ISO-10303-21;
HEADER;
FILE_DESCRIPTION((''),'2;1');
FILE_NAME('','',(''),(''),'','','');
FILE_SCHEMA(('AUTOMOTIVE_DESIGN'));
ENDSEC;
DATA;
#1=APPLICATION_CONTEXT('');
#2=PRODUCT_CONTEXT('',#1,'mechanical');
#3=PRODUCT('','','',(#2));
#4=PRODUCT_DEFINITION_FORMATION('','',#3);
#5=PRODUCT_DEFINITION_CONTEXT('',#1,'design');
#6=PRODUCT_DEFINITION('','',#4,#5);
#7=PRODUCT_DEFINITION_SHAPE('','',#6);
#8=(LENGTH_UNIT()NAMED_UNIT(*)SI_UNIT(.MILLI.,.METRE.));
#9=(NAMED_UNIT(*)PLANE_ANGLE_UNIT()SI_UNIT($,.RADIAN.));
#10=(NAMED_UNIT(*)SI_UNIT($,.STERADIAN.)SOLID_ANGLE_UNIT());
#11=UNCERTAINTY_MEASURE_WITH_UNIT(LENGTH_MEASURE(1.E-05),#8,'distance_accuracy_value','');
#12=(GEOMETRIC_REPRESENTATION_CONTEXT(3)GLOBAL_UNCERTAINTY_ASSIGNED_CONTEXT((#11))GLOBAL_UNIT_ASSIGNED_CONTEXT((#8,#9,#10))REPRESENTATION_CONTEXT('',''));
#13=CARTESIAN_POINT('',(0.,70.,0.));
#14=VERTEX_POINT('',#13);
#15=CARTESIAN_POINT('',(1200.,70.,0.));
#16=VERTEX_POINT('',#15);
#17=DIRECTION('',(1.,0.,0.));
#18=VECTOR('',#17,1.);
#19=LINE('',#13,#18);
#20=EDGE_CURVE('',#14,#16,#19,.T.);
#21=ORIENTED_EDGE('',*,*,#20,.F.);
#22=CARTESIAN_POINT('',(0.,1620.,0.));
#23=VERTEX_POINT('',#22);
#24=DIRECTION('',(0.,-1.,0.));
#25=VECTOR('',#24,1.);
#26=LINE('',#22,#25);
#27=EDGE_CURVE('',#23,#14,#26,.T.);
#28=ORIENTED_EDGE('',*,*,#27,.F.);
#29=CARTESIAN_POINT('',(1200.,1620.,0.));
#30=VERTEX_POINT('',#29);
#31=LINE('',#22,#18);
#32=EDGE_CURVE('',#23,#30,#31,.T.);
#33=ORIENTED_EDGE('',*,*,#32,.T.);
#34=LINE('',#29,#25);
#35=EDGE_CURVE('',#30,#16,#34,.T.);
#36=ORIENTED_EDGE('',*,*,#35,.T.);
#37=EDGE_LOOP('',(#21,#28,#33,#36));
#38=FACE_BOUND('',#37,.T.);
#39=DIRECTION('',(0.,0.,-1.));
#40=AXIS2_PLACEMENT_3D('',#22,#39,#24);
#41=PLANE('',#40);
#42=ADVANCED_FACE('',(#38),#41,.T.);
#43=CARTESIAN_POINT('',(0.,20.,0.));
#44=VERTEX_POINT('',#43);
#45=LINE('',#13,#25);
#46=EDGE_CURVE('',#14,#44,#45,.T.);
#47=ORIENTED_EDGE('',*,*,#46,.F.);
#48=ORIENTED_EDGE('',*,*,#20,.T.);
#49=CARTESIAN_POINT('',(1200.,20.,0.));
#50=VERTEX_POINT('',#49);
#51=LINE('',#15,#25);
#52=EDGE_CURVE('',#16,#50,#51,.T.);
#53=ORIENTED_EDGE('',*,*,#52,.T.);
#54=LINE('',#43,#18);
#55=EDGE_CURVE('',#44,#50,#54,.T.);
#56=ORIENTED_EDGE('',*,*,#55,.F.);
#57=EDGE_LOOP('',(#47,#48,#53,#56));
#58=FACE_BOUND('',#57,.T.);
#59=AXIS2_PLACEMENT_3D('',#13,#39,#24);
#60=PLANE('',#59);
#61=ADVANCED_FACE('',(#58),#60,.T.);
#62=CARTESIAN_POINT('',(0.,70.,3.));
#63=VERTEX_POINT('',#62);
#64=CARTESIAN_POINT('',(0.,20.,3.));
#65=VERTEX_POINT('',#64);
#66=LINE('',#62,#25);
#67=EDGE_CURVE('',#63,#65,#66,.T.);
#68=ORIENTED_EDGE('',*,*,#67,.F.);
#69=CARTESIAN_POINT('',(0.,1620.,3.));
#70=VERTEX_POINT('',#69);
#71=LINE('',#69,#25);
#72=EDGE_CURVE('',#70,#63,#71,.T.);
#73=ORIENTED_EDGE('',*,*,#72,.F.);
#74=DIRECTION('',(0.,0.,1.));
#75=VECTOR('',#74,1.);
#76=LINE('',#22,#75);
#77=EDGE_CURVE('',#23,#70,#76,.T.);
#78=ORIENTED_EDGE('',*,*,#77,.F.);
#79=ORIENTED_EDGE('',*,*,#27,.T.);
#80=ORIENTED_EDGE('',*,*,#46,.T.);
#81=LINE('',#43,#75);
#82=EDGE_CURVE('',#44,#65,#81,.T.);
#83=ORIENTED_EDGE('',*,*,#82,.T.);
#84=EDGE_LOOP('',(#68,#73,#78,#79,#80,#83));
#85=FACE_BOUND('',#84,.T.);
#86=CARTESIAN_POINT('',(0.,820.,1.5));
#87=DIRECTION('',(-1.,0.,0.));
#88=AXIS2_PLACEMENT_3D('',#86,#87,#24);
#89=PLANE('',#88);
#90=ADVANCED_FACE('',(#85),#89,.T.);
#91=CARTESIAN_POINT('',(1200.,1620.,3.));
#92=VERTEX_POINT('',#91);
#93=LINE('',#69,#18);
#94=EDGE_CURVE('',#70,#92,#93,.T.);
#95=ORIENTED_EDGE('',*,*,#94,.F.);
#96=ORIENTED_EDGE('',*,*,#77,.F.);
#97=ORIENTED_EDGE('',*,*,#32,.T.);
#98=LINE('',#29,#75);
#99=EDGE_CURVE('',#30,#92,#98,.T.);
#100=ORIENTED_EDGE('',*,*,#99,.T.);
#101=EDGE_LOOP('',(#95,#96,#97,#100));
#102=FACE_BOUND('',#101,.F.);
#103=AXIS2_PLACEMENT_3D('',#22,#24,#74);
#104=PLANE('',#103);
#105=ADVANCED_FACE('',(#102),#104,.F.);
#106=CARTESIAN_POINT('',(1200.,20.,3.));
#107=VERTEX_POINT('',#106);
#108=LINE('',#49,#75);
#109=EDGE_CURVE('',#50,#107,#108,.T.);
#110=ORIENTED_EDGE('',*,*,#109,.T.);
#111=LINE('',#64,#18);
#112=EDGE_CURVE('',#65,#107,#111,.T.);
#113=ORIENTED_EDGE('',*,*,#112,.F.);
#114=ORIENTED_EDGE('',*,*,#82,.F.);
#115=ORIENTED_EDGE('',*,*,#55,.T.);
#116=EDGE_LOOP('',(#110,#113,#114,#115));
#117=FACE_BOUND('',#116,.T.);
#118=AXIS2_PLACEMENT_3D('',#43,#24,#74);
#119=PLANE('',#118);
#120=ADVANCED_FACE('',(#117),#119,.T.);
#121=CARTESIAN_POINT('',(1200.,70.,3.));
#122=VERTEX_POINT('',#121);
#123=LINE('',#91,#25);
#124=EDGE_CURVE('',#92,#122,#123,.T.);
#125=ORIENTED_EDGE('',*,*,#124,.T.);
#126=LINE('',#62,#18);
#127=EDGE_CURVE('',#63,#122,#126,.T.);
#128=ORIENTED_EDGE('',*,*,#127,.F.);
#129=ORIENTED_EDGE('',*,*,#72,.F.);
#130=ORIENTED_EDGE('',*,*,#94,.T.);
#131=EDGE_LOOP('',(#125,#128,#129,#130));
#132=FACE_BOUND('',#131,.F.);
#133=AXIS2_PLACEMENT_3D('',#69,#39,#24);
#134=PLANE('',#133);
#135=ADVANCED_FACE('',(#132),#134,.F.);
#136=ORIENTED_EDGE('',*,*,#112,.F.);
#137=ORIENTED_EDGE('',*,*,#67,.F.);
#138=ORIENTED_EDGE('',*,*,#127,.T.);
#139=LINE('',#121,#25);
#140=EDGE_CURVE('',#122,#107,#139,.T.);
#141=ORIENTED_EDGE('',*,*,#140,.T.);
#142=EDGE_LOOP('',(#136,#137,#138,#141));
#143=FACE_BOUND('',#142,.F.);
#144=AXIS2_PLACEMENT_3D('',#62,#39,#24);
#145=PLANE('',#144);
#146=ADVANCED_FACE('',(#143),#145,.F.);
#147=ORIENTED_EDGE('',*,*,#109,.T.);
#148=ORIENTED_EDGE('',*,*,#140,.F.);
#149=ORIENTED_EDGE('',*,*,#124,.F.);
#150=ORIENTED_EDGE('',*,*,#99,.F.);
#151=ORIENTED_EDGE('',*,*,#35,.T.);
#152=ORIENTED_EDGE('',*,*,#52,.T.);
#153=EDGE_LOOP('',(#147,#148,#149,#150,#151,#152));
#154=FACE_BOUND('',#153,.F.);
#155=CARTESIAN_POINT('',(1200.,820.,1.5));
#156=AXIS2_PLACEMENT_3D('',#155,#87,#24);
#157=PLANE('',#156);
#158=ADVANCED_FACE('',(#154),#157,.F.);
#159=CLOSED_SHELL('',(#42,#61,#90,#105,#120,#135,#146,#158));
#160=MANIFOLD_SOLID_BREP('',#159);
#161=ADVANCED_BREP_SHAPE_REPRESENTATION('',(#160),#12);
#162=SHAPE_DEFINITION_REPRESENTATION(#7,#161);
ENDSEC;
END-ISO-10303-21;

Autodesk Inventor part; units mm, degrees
ref_plane "YZ Plane" through (0, 0, 0) normal (1, 0, 0) x (0, 1, 0)
ref_plane "XZ Plane" through (0, 0, 0) normal (0, 1, 0) x (-1, 0, 0)
ref_plane "XY Plane" through (0, 0, 0) normal (0, 0, 1) x (1, 0, 0)
sketch "Sketch1" plane through (0, 0, 0) normal (1, 0, 0) x (0, 1, 0)
  line L0 (1620, 0) -> (70, 0)
  line L1 (70, 0) -> (20, 0)
  line L2 (20, 0) -> (0, 0)
  dimension "d0" = 180
  dimension "d1" = 50
  dimension "d2" = 1620
  dimension "d3" = 20
contour flange "Contour Flange1" sketch "Sketch1" thickness 3 bend radius 3 width 1200 along (1, 0, 0) mid plane no both sides no wall seen from (0, 845, 0) lies toward (0, 0, 1) curves L0 L1
bend "Bend1"
corner "Corner1"
sketch "Sketch2" plane through (2.1213, 1620, 0.8787) normal (-0.7071068, 0, 0.7071068) x (0, -1, 0)
  line L0 (1600, 0) -> (0, 0)
  line L1 (0, 0) -> (0, -50)
  line L2 (0, -50) -> (1600, -50)
  line L3 (1600, -50) -> (1600, 0)
equation "\"d4\" = Thickness"
equation "\"d5\" = BendReliefWidth"
equation "\"d6\" = BendReliefDepth"
equation "\"d7\" = MinimumRemnant"
equation "\"d8\" = TransitionRadius"
equation "\"d10\" = BendRadius"
equation "\"d12\" = CornerReliefSize"
equation "\"d13\" = GapSize"
equation "\"d14\" = JacobiRadiusSize"
equation "\"BendRadius\" = Thickness"
equation "\"BendReliefWidth\" = Thickness"
equation "\"BendReliefDepth\" = 0.5 * Thickness"
equation "\"CornerReliefSize\" = 4 * Thickness"
equation "\"MinimumRemnant\" = 2 * Thickness"
equation "\"TransitionRadius\" = BendRadius"
equation "\"JacobiRadiusSize\" = BendRadius"
equation "\"GapSize\" = Thickness"
equation "\"Thickness\" = 3"
properties part number "GBK-RK-0013 long wall 3"
